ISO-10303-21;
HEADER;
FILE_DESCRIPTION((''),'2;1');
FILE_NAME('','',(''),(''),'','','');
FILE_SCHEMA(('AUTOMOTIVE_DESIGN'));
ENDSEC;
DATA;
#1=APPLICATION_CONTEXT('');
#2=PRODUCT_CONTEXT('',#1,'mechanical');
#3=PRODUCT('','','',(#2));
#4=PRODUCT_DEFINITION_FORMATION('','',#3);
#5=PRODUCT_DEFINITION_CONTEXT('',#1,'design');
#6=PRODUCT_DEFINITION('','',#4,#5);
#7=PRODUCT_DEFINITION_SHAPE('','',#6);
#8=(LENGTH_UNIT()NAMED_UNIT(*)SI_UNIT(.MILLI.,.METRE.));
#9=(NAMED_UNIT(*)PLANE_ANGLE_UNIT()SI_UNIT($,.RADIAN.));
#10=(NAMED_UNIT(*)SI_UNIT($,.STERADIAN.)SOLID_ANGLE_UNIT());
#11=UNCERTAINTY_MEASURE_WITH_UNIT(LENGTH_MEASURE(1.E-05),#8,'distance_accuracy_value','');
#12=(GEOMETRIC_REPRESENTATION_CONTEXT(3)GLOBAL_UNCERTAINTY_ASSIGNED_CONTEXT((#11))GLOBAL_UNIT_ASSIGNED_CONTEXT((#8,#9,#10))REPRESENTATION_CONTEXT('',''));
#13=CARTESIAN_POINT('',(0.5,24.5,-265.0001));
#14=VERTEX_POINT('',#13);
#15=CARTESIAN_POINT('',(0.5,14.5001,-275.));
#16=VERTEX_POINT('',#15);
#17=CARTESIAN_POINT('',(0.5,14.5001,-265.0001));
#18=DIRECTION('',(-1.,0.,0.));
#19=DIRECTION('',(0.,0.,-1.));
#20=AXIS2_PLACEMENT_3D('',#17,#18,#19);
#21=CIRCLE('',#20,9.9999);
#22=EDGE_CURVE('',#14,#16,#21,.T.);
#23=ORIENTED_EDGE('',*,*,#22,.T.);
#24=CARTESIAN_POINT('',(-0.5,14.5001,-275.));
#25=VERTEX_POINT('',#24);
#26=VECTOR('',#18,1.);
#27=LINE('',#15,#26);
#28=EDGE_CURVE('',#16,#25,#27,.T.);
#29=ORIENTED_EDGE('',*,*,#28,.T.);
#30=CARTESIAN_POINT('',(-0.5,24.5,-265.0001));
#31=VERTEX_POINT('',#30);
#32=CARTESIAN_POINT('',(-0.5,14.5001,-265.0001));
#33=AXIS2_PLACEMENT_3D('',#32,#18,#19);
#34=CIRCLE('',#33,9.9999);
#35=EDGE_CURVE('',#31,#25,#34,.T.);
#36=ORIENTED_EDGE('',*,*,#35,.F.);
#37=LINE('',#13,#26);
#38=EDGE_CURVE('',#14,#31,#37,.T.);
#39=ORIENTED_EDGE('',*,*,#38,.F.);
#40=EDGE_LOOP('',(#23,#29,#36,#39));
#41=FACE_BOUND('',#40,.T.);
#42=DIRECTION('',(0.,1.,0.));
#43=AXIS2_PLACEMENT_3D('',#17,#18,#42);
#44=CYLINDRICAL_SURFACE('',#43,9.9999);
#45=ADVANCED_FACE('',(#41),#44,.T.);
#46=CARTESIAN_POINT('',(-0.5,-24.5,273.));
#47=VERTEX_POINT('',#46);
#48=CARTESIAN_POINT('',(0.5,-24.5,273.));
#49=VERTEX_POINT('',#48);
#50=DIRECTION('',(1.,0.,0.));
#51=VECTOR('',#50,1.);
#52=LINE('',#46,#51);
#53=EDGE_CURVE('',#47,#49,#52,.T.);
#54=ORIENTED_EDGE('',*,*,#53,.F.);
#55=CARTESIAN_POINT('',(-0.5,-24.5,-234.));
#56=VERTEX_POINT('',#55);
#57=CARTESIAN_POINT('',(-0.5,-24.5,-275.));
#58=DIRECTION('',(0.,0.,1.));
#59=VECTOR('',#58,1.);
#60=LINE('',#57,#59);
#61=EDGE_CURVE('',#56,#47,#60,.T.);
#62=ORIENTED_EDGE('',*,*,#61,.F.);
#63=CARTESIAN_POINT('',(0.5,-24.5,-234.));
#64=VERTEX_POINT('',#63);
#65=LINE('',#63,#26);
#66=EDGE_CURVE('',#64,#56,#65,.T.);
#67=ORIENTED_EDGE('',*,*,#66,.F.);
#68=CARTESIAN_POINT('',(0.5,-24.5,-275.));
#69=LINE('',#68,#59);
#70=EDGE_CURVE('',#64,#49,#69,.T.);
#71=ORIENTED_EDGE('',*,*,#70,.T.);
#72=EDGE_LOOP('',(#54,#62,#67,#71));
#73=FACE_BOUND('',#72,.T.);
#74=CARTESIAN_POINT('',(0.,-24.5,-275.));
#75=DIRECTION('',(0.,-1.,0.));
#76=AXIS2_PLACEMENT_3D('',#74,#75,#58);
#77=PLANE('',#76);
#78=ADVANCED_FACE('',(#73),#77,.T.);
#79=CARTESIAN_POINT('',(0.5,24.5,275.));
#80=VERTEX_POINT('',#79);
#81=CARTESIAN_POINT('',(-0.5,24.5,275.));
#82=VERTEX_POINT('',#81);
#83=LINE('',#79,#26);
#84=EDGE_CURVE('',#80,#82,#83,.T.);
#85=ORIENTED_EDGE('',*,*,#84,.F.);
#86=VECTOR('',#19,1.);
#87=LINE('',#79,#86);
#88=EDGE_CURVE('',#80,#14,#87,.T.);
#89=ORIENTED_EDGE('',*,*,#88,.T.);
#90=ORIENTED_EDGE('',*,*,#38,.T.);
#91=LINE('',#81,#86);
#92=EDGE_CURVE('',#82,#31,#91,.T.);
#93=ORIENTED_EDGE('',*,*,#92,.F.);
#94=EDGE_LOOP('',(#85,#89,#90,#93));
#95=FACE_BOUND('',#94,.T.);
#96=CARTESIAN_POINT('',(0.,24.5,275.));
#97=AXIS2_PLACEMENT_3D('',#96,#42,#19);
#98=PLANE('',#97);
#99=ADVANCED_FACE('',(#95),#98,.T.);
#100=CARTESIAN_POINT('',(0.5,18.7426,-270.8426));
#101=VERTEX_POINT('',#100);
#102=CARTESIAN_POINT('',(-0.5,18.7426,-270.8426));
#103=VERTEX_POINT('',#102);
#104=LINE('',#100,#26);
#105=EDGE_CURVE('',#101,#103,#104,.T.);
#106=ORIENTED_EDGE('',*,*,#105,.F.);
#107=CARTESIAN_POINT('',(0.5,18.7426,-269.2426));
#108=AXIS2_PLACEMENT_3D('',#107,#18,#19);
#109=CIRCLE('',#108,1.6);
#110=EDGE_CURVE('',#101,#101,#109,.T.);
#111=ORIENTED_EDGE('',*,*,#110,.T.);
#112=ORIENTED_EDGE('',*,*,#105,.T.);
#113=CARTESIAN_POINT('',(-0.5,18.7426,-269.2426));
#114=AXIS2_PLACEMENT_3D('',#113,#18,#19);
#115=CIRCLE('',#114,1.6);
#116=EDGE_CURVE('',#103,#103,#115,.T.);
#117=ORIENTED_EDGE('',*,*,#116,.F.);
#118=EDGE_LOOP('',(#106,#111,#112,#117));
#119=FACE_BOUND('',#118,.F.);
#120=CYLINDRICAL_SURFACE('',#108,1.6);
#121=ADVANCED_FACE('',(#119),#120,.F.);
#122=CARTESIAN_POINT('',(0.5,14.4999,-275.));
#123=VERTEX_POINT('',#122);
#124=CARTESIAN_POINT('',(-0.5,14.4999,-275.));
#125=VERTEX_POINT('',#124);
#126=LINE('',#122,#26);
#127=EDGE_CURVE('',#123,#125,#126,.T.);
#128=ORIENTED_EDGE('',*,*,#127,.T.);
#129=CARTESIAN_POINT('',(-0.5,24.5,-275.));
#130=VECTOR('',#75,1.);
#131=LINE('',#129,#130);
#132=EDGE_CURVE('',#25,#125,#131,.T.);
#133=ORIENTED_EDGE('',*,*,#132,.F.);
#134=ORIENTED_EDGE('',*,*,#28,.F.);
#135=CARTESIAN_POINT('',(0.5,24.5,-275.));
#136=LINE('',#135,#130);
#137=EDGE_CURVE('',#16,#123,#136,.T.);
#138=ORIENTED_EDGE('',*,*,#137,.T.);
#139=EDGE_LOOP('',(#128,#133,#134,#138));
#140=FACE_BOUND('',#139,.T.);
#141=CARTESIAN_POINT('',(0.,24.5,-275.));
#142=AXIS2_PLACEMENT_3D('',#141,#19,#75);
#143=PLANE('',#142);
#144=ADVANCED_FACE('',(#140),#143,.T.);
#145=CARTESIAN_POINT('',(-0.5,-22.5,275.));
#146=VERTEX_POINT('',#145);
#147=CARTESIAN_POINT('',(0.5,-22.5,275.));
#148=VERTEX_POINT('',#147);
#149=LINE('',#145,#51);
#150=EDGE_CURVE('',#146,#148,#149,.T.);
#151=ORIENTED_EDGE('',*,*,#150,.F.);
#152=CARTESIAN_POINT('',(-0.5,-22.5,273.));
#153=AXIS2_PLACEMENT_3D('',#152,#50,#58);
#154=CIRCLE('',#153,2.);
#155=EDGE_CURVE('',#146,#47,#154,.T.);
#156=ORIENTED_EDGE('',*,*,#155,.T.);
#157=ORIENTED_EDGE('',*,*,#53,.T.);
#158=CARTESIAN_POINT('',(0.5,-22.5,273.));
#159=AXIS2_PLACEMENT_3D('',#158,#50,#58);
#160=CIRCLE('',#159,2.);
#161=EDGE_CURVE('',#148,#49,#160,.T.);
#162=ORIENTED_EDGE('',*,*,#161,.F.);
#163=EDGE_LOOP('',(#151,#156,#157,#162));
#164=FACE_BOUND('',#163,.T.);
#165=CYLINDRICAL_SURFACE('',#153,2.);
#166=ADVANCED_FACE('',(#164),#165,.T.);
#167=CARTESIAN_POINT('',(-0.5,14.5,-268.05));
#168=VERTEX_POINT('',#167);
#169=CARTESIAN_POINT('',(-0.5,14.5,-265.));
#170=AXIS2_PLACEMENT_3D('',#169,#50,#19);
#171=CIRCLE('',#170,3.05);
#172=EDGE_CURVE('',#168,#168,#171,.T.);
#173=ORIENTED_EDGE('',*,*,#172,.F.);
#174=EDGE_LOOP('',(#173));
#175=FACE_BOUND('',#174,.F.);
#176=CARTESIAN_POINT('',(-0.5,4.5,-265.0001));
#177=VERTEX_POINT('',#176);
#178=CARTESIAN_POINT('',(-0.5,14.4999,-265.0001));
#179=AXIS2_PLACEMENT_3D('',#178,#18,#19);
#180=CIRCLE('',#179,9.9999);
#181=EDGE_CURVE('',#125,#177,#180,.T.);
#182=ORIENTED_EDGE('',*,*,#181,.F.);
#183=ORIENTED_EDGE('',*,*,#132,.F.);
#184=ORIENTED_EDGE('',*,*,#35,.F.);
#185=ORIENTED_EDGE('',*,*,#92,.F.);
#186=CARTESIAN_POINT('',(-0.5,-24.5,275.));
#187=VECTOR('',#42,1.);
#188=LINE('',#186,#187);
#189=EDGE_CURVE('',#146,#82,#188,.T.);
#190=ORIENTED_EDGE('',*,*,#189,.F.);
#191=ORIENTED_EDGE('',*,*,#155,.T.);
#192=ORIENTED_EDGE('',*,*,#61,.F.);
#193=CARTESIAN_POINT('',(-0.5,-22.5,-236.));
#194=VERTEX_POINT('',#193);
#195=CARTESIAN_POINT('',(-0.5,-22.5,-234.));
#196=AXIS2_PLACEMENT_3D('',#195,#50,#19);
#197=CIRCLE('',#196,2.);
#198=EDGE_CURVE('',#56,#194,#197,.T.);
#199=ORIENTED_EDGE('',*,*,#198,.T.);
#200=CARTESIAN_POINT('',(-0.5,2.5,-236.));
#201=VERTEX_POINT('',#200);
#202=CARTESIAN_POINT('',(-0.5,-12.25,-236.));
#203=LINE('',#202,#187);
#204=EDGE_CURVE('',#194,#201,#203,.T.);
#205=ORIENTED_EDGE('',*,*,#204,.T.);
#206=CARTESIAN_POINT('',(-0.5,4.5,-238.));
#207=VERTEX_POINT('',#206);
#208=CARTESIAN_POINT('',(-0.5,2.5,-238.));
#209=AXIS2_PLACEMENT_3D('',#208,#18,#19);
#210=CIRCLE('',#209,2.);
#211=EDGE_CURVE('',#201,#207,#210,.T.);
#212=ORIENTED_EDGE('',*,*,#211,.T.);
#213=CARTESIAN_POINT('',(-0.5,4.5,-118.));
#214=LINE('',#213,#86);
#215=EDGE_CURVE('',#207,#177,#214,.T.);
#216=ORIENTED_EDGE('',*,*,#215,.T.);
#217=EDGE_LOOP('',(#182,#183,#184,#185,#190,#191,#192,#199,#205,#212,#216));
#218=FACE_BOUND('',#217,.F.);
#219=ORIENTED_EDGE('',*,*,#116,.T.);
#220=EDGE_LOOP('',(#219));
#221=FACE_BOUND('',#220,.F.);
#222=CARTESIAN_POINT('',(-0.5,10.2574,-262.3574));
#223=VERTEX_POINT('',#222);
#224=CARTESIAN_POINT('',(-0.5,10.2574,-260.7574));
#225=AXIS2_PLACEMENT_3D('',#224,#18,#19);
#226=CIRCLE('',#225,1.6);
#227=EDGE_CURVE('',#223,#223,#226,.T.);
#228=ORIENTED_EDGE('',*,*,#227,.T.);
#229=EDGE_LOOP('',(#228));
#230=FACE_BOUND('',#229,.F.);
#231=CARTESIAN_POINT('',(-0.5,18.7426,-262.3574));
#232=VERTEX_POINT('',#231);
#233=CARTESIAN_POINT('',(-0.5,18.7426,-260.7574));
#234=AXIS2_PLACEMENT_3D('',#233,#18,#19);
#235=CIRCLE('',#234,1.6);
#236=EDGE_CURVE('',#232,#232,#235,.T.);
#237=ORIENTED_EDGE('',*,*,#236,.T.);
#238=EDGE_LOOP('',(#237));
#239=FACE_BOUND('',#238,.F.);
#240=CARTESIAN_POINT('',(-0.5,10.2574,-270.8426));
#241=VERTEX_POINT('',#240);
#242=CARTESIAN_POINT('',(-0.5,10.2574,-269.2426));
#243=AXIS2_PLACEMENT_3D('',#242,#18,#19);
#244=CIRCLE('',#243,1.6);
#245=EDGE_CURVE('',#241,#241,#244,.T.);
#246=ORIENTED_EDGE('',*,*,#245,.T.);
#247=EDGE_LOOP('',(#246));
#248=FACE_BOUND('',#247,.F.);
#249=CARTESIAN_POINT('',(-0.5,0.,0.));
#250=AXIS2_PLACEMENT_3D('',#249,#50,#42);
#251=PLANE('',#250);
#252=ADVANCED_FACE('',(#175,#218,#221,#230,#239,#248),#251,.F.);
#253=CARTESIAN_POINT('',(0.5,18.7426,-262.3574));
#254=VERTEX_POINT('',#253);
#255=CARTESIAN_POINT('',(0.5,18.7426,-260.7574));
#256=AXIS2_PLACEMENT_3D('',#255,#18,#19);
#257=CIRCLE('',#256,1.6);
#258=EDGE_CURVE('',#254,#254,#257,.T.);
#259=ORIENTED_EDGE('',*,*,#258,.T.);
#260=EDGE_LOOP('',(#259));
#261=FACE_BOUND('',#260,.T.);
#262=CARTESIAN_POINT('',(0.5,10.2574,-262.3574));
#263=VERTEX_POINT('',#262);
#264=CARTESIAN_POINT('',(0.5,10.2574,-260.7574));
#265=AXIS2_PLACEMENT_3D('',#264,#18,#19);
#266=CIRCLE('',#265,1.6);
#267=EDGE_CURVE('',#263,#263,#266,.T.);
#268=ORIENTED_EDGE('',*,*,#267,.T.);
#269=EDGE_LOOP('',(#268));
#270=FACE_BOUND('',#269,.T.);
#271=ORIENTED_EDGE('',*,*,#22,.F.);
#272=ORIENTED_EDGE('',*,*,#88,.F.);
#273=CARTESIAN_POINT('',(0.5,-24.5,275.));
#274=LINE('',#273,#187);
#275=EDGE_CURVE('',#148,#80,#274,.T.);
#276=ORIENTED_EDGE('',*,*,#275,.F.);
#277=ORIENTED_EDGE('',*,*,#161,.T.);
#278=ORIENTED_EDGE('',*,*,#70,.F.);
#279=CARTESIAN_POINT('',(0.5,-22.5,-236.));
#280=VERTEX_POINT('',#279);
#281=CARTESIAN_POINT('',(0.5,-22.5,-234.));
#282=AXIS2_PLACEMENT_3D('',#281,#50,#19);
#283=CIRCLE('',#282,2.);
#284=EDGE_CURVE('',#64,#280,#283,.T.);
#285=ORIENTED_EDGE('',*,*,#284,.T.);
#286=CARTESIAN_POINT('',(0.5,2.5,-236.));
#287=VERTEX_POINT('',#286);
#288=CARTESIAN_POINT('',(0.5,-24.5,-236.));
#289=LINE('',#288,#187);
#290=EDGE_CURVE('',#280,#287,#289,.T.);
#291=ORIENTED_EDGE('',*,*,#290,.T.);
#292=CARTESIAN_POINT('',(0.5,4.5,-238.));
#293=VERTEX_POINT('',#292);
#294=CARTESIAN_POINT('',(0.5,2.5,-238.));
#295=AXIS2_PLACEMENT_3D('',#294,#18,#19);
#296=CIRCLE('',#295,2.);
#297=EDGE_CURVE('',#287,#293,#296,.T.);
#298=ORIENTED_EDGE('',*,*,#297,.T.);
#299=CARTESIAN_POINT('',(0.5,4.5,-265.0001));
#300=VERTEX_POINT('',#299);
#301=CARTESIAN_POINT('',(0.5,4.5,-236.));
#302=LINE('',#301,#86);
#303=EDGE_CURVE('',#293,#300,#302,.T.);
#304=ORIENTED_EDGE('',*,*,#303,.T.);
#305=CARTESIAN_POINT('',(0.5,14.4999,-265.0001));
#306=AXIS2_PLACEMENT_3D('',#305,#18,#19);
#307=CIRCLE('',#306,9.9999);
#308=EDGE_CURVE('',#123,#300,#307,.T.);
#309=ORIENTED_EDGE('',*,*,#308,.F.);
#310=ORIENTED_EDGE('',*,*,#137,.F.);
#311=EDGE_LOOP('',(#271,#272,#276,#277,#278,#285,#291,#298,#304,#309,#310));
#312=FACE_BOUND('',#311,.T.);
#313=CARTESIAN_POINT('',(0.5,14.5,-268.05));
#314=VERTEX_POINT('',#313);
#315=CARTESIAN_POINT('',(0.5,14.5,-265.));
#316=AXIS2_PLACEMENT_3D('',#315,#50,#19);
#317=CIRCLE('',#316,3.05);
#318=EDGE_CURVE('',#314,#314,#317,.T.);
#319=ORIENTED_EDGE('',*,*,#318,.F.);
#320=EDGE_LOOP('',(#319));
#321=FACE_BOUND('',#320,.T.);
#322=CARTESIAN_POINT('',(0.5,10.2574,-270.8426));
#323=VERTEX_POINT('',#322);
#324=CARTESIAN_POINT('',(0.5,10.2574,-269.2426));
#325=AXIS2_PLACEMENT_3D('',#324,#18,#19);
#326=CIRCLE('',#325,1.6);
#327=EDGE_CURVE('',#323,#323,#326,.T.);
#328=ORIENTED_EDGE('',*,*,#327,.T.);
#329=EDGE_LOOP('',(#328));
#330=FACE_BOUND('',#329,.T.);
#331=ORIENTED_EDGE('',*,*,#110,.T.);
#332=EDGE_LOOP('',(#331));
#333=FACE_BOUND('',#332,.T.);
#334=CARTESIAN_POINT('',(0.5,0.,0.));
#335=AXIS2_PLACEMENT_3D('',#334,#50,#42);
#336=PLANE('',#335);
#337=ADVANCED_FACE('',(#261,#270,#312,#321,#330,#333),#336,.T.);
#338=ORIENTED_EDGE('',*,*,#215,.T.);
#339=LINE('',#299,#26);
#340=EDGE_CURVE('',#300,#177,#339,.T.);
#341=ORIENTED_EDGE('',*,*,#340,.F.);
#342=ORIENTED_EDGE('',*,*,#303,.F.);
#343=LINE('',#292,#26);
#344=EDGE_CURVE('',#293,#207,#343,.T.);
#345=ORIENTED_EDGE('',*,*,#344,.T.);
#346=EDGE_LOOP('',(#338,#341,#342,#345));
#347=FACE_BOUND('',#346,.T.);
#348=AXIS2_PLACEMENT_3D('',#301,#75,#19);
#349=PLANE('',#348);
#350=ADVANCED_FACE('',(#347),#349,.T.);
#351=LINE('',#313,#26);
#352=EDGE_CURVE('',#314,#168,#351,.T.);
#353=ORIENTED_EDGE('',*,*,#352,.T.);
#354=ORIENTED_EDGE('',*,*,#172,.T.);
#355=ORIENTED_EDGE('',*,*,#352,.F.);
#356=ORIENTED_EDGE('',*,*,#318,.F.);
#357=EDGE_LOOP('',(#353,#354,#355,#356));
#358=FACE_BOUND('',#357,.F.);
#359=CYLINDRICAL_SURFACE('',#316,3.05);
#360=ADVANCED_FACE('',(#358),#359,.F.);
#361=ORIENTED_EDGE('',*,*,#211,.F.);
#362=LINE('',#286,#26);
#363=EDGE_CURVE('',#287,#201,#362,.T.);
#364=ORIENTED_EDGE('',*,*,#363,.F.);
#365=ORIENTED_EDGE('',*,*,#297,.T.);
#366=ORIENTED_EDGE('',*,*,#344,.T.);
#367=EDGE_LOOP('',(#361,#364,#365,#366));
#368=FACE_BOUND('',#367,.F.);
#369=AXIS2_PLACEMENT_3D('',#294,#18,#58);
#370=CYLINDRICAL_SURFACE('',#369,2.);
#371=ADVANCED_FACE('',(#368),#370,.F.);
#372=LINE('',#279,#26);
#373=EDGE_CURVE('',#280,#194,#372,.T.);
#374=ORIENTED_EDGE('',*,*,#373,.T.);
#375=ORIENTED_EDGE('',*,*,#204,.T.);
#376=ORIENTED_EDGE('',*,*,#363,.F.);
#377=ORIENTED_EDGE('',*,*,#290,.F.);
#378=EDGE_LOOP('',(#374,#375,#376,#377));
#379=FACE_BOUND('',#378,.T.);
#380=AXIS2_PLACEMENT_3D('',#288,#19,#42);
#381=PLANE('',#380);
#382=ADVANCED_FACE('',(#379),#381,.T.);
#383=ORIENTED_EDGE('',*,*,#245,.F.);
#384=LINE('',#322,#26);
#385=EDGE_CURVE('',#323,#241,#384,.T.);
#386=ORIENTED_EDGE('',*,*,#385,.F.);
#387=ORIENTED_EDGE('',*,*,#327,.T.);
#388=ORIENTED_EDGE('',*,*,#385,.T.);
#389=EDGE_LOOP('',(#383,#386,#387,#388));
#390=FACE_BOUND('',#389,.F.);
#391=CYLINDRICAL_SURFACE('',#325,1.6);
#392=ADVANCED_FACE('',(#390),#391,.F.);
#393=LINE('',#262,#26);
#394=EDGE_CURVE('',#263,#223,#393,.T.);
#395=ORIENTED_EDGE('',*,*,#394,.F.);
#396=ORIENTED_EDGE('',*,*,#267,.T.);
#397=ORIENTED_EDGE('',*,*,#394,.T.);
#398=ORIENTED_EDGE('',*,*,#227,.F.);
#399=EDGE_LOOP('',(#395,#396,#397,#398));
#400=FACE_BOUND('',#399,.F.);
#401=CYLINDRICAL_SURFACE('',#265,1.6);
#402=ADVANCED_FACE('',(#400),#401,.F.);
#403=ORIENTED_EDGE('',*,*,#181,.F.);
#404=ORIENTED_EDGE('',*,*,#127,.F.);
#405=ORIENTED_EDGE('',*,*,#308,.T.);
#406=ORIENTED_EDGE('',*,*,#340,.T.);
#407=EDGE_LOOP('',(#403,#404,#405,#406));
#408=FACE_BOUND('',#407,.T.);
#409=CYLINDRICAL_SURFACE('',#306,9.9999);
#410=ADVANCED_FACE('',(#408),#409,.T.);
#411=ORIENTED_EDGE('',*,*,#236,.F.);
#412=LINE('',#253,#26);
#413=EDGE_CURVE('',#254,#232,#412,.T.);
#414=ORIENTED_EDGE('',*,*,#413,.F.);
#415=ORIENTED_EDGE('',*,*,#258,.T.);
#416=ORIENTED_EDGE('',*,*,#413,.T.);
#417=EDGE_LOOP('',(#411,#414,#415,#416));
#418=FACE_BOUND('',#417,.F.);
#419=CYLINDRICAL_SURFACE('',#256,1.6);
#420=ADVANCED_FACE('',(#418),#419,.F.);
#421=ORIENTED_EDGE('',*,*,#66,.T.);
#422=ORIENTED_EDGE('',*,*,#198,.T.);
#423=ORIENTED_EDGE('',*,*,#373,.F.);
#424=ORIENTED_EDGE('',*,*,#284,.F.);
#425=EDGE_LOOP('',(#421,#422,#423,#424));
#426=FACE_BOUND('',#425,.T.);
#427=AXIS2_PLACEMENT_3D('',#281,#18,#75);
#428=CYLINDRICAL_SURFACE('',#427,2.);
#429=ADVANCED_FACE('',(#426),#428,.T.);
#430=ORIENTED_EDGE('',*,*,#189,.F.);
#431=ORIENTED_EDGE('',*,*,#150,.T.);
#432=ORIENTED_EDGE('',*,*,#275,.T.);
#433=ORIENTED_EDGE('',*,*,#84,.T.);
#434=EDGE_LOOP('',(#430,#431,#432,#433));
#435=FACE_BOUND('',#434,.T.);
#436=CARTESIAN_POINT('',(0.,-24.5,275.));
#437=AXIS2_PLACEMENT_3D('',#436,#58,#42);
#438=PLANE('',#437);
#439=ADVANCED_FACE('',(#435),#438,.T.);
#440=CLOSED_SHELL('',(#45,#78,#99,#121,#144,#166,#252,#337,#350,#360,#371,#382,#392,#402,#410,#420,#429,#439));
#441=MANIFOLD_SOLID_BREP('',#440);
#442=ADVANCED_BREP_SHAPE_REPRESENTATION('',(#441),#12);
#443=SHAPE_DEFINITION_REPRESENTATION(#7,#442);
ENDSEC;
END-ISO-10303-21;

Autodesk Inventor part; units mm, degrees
ref_plane "YZ Plane" through (0, 0, 0) normal (1, 0, 0) x (0, 1, 0)
ref_plane "XZ Plane" through (0, 0, 0) normal (0, 1, 0) x (-1, 0, 0)
ref_plane "XY Plane" through (0, 0, 0) normal (0, 0, 1) x (1, 0, 0)
sketch "スケッチ1" plane through (0, 0, 0) normal (1, 0, 0) x (0, 1, 0)
  line L0 (-24.5, 275) -> (24.5, 275)
  line L1 (24.5, 275) -> (24.5, -275)
  line L2 (24.5, -275) -> (-24.5, -275)
  line L3 (-24.5, -275) -> (-24.5, 275)
  line L4 (-24.5, 275) -> (24.5, -275) construction
  line L5 (24.5, 275) -> (-24.5, -275) construction
  point P0 (0, 0)
  dimension "d0" = 49
  dimension "d1" = 550
extrude "プレート1" add sketch "スケッチ1" along normal mid plane 1
sketch "スケッチ3" plane through (0.5, 0, 0) normal (1, 0, 0) x (0, 0, -1)
  circle A0 centre (265, 14.5) radius 6
  line L0 (275, 24.5) -> (275, -24.5) projected
  line L1 (-275, 24.5) -> (275, 24.5) projected
  point P0 (0, 0)
  point P1 (269.2426, 18.7426)
  point P2 (260.7574, 18.7426)
  point P3 (260.7574, 10.2574)
  point P4 (269.2426, 10.2574)
  dimension "d13" = 12
  dimension "d14" = 10
  dimension "d15" = 10
  dimension "d18" = 360
  dimension "d30" = 0
hole "穴2" at (0.5, 18.7426, -269.2426) at (0.5, 18.7426, -260.7574) at (0.5, 10.2574, -260.7574) at (0.5, 10.2574, -269.2426) direction (-1, 0, 0) diameter 3.2 end through all clearance for "Socket Head Cap Screw" size "M3" standard "Ansi Metric M Profile"
sketch "スケッチ4" plane through (0.5, 0, 0) normal (1, 0, 0) x (0, 0, -1)
  circle A0 centre (265, 14.5) radius 3.05
  point P0 (0, 0)
  dimension "d27" = 6.1
extrude "押し出し1" cut sketch "スケッチ4" against normal blind 10
sketch "スケッチ5" plane through (0.5, 0, 0) normal (1, 0, 0) x (0, 0, -1)
  line L0 (275, -24.5) -> (236, -24.5)
  line L1 (236, -24.5) -> (236, 4.5)
  line L2 (236, 4.5) -> (275, 4.5)
  line L3 (275, 4.5) -> (275, -24.5)
  line L4 (-275, 24.5) -> (216, 24.5)
  line L5 (216, 24.5) -> (216, 4.5)
  line L6 (216, 4.5) -> (-275, 4.5)
  line L7 (-275, 4.5) -> (-275, 24.5)
  line L8 (275, -24.5) -> (-275, -24.5) projected
  circle A0 centre (265, 14.5) radius 3.05 projected
  point P0 (0, 0)
  dimension "d35" = 29
  dimension "d36" = 20
  dimension "d40" = 29
  dimension "d41" = 10
extrude "押し出し2" cut sketch "スケッチ5" against normal blind 10 contours L0 L1 L2 L3
fillet "コーナーR2" radius 10 2 edges at (0, 24.5, -275) (0, 4.5, -275)
fillet "コーナーR3" radius 2 3 edges at (0, 4.5, -236) (0, -24.5, -236) (0, -24.5, 275)
equation "\"d15\" = d14"
equation "\"d25\" = Thickness"
equation "\"d2\" = Thickness"
equation "\"BendRadius\" = Thickness"
equation "\"BendReliefWidth\" = Thickness"
equation "\"BendReliefDepth\" = 0.5 * Thickness"
equation "\"CornerReliefSize\" = 4 * Thickness"
equation "\"MinimumRemnant\" = 2 * Thickness"
equation "\"TransitionRadius\" = BendRadius"
equation "\"JacobiRadiusSize\" = BendRadius"
equation "\"GapSize\" = Thickness"
equation "\"Thickness\" = 1"
properties part number "s_carbon_plate5" material "CFRP"
